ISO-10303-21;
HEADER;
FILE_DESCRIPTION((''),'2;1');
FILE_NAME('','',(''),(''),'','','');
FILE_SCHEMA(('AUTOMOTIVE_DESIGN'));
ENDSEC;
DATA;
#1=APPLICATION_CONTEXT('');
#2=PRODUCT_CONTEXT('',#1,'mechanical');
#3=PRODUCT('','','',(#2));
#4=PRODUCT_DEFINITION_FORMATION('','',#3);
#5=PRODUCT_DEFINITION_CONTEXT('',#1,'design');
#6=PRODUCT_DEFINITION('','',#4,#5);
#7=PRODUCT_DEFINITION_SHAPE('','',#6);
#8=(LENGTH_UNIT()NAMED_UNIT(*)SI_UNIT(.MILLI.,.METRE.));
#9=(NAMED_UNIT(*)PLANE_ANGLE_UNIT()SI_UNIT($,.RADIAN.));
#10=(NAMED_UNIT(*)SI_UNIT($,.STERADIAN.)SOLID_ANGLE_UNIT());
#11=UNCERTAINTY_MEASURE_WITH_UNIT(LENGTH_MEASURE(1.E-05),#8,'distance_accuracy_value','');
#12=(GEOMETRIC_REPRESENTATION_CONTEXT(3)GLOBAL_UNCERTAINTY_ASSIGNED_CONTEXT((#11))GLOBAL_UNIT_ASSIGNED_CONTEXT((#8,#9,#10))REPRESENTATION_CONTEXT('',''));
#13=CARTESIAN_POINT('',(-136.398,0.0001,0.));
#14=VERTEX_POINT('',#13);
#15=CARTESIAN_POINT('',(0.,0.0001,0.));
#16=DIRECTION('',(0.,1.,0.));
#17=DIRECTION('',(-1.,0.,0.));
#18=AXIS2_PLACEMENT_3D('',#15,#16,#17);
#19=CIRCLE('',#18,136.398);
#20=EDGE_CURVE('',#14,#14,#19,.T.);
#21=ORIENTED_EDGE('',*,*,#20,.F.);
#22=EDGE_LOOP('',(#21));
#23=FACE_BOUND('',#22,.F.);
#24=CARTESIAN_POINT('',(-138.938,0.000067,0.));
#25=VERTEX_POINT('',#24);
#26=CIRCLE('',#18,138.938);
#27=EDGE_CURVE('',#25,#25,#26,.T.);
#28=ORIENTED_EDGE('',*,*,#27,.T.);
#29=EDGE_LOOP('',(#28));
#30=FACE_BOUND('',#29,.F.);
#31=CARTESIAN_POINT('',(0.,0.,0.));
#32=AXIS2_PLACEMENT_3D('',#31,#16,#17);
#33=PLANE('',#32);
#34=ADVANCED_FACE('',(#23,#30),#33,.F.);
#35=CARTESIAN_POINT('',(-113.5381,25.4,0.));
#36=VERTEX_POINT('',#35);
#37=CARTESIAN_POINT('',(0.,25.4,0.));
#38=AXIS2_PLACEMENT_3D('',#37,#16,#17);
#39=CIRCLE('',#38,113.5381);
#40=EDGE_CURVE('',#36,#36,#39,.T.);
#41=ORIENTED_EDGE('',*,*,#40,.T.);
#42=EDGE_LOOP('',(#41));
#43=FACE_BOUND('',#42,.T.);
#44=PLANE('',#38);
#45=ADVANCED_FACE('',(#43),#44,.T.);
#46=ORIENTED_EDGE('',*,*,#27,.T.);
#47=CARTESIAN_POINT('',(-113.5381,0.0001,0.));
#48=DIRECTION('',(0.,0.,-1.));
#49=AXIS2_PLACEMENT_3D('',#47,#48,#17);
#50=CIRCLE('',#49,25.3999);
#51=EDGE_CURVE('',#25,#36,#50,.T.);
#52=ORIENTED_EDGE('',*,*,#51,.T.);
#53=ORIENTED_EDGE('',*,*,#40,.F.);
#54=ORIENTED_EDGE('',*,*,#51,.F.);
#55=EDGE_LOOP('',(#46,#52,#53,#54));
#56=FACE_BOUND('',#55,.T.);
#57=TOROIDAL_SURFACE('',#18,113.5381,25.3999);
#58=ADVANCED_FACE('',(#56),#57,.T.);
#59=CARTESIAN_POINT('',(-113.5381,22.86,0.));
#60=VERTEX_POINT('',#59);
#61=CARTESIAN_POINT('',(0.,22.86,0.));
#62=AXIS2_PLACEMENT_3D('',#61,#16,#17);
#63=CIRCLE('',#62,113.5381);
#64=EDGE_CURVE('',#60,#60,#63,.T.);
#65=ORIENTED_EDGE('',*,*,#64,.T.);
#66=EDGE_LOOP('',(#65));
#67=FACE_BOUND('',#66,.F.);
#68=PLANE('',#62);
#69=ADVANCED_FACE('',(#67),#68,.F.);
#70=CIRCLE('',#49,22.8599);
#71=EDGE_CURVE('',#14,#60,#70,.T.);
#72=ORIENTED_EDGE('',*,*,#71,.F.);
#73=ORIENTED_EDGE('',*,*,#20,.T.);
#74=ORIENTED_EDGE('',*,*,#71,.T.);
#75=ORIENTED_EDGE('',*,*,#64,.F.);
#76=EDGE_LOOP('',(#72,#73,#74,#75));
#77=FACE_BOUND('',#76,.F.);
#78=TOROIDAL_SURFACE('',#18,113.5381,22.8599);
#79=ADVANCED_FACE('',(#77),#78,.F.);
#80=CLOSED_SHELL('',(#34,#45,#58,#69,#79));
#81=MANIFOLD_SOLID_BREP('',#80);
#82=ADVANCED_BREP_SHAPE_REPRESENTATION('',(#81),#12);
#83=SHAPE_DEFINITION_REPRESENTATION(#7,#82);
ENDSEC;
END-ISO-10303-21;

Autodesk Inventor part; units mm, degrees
ref_plane "YZ Plane" through (0, 0, 0) normal (1, 0, 0) x (0, 1, 0)
ref_plane "XZ Plane" through (0, 0, 0) normal (0, 1, 0) x (-1, 0, 0)
ref_plane "XY Plane" through (0, 0, 0) normal (0, 0, 1) x (1, 0, 0)
sketch "Sketch1" plane through (0, 0, 0) normal (0, 1, 0) x (-1, 0, 0)
  circle A0 centre (0, 0) radius 138.938
  dimension "d0" = 277.876
extrude "Extrusion1" add sketch "Sketch1" along normal blind 25.4
fillet "Fillet1" radius 25.4 1 edges at (138.938, 25.4, 0)
shell "Shell1" thickness 2.54 removed faces 2 at (78.7519, 0.0001, -114.4636) at (28.4576, 0, -60.367)
properties part number "Frisbee" material "Glass"
